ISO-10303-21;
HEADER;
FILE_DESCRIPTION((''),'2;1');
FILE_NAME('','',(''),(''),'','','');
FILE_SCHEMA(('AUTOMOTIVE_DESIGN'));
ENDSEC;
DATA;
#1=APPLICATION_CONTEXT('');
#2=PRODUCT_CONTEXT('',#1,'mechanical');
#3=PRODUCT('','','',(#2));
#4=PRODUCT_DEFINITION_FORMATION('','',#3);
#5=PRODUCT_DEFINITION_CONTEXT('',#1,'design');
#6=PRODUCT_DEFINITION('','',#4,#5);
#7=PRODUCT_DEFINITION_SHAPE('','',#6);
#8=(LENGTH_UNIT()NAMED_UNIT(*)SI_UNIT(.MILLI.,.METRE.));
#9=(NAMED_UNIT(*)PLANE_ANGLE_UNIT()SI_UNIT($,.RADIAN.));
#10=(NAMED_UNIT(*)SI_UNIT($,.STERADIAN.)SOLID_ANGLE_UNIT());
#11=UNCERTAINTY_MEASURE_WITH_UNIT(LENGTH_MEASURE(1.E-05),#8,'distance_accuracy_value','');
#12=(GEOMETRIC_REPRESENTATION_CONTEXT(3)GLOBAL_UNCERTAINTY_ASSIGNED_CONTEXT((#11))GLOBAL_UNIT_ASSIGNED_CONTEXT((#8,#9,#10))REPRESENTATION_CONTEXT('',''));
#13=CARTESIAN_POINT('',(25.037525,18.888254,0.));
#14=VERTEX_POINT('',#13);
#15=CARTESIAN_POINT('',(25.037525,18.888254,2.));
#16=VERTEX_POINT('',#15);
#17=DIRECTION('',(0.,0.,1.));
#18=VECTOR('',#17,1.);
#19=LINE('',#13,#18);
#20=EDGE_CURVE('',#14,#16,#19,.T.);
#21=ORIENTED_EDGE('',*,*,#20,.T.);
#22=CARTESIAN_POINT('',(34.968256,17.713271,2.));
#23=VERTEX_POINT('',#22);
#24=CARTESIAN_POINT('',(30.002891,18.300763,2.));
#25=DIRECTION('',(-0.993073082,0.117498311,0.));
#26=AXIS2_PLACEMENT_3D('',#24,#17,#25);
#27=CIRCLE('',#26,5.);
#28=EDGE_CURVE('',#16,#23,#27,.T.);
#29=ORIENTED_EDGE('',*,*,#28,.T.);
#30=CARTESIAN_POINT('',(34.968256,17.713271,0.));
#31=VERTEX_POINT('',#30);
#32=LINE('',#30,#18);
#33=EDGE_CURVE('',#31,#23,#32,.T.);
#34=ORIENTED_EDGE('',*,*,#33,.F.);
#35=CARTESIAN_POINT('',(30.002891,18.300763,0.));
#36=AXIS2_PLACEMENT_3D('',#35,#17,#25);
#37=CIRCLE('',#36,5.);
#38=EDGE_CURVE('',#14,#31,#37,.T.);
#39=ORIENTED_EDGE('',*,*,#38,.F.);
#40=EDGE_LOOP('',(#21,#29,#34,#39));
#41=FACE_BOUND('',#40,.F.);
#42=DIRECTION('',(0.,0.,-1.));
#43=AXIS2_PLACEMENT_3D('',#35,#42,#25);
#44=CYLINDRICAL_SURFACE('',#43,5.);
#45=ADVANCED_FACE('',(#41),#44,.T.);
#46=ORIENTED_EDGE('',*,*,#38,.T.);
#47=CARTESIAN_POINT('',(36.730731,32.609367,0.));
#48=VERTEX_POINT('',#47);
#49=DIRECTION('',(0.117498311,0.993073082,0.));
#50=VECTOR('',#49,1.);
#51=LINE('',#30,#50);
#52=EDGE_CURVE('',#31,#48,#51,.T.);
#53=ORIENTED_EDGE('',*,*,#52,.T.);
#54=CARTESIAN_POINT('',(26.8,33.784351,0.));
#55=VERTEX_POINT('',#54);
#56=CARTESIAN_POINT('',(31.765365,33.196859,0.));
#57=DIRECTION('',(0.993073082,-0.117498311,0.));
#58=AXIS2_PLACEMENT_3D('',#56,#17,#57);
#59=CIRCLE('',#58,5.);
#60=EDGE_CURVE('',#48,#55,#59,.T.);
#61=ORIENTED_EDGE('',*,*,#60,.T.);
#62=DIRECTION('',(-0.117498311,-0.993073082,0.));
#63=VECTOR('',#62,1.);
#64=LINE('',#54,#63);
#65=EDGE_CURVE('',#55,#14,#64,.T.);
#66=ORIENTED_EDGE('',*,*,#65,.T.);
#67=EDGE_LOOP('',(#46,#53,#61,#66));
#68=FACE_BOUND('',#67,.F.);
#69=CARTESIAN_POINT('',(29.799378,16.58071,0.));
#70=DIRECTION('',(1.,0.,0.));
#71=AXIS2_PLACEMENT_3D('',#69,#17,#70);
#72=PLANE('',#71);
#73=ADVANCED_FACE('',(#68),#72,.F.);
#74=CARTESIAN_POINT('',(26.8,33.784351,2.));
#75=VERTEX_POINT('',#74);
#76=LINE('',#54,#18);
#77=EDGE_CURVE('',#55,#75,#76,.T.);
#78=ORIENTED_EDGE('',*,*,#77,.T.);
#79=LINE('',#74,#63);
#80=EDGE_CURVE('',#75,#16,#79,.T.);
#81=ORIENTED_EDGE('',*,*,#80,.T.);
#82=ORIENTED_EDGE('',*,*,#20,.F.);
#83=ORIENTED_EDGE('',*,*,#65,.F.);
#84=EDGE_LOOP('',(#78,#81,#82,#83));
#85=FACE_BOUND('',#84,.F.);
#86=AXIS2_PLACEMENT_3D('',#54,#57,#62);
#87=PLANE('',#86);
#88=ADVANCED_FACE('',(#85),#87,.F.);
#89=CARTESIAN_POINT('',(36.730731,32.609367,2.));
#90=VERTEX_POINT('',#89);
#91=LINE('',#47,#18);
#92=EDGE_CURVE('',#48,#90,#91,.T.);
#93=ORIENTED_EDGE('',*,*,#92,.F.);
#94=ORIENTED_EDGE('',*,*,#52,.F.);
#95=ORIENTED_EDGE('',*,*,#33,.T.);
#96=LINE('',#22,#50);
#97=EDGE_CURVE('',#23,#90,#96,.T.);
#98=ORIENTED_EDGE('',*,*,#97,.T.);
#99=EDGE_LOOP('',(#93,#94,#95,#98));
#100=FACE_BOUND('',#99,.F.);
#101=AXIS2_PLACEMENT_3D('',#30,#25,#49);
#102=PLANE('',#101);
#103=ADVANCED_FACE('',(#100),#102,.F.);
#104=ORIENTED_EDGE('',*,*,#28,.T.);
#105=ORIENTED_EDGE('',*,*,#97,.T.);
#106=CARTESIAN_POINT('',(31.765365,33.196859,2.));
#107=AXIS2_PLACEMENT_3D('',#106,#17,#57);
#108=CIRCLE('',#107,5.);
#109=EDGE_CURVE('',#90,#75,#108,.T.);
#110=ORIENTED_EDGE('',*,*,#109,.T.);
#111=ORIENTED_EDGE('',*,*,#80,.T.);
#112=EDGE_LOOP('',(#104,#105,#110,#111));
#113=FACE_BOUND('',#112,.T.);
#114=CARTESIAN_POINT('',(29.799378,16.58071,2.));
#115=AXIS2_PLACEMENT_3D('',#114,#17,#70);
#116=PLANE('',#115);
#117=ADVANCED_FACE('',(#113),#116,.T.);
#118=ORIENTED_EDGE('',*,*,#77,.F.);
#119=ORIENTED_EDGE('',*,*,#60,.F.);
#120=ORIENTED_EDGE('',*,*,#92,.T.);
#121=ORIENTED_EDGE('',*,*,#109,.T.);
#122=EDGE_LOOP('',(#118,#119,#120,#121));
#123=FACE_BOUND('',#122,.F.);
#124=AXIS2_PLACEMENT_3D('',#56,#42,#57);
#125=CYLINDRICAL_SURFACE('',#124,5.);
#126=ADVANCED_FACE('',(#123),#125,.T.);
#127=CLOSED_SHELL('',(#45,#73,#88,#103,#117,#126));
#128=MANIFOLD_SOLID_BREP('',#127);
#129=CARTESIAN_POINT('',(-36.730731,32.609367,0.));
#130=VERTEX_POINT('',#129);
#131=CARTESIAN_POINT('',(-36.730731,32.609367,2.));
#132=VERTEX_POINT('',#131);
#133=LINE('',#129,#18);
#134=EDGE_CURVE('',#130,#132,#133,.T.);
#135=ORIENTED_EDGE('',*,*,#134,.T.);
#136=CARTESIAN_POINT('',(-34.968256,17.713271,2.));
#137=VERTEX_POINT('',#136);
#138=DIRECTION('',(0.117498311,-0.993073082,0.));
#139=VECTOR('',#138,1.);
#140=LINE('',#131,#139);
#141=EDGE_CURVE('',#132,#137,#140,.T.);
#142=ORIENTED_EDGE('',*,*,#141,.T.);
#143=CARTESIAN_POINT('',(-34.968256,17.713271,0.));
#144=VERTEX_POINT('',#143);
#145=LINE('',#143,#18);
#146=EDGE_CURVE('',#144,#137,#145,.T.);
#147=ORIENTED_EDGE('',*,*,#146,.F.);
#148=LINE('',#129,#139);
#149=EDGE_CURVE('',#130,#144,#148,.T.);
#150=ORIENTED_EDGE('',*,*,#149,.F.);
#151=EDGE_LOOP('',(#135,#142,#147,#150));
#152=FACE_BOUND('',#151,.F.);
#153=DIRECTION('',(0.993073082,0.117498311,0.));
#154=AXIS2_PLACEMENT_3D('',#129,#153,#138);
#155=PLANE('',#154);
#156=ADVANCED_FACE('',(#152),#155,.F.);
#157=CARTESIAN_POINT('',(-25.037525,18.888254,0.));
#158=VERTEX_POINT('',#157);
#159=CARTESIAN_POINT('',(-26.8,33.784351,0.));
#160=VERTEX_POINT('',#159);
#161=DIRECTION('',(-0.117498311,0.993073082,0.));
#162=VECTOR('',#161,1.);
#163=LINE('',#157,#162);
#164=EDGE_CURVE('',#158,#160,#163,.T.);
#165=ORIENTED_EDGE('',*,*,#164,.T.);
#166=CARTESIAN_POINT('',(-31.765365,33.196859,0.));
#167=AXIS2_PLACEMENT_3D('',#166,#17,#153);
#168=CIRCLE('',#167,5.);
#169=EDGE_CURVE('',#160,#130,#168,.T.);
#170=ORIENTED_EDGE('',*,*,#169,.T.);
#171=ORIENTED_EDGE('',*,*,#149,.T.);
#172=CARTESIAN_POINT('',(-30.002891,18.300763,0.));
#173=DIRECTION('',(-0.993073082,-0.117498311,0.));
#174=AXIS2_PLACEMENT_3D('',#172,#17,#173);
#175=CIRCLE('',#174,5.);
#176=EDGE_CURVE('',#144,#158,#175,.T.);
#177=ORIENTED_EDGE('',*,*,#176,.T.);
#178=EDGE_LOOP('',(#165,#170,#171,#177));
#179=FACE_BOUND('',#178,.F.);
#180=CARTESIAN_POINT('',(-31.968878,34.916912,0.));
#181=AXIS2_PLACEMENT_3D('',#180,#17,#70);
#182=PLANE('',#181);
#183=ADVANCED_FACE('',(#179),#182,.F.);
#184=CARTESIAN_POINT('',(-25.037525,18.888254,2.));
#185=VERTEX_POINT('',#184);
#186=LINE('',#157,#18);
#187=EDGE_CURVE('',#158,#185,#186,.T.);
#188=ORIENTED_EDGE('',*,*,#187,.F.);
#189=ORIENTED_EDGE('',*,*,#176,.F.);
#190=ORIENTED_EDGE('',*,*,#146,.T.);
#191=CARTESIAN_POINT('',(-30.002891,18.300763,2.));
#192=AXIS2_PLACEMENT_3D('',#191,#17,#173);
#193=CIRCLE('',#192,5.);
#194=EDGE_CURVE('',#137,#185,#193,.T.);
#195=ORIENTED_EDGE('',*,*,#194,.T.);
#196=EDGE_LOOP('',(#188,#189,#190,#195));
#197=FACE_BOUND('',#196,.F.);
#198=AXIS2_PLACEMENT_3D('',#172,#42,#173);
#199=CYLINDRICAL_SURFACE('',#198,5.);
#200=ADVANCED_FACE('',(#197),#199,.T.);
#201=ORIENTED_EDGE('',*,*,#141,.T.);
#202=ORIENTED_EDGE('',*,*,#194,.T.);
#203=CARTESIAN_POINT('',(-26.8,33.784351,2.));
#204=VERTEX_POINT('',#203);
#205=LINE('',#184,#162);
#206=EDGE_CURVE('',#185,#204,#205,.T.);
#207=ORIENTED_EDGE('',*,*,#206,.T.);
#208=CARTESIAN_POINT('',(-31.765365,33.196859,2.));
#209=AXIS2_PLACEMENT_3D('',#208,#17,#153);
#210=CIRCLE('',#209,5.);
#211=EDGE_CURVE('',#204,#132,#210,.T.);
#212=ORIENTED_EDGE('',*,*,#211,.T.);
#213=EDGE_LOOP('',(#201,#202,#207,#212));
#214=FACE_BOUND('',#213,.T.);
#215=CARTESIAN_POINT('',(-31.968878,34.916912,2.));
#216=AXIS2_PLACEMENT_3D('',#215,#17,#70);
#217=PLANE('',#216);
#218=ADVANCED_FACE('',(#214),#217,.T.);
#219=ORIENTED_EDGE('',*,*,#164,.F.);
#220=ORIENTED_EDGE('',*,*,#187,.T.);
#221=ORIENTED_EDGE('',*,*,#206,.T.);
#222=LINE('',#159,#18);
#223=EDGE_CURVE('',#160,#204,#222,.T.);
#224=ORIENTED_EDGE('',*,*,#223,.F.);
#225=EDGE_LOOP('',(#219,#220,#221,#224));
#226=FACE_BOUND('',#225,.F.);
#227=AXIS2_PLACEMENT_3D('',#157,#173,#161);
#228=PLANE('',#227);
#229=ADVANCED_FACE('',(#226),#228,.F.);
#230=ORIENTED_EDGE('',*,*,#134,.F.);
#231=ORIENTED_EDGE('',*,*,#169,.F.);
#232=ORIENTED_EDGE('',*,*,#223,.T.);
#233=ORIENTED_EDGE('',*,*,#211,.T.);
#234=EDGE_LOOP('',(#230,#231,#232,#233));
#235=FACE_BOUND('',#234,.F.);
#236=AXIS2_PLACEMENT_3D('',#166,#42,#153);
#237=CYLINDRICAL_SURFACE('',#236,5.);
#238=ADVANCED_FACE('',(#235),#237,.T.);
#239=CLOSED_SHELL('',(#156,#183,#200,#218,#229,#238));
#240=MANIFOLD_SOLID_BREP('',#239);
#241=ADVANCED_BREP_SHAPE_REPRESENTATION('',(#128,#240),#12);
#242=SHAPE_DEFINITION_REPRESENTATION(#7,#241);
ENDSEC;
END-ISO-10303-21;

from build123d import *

# Parameters (mm, degrees)
F1_DEPTH = 2


# Not quite as in the source:
# - the program builds the solid bodies; features that only make, move or delete a surface that nothing else refers to are left out


with BuildPart() as f1:
    # F0 (on Top) → F1 (new body)
    with BuildSketch(Plane.XY):
        with BuildLine():
            Line((-36.7307308238, 32.6093674274), (-26.8, 33.7843505361))
            ThreePointArc((-26.8, 33.7843505361), (-32.3528569662, 38.1622243937), (-36.7307308238, 32.6093674274))
        make_face()
        Polygon((-25.037525337, 18.8882543005), (-26.8, 33.7843505361), (-36.7307308238, 32.6093674274), (-34.9682561607, 17.7132711918), align=None)
        with BuildLine():
            ThreePointArc((-34.9682561607, 17.7132711918), (-29.4153991945, 13.3353973342), (-25.037525337, 18.8882543005))
            Line((-25.037525337, 18.8882543005), (-34.9682561607, 17.7132711918))
        make_face()
    extrude(amount=F1_DEPTH)


with BuildPart() as f1b:
    # F0 (on Top) → F1, piece 2 (new body)
    with BuildSketch(Plane.XY):
        with BuildLine():
            Line((34.9682561607, 17.7132711918), (25.037525337, 18.8882543005))
            ThreePointArc((25.037525337, 18.8882543005), (29.4153991945, 13.3353973342), (34.9682561607, 17.7132711918))
        make_face()
        Polygon((36.7307308238, 32.6093674274), (26.8, 33.7843505361), (25.037525337, 18.8882543005), (34.9682561607, 17.7132711918), align=None)
        with BuildLine():
            ThreePointArc((36.7307308238, 32.6093674274), (32.3528569662, 38.1622243937), (26.8, 33.7843505361))
            Line((26.8, 33.7843505361), (36.7307308238, 32.6093674274))
        make_face()
    extrude(amount=F1_DEPTH)


solid = Compound([f1.part, f1b.part])
